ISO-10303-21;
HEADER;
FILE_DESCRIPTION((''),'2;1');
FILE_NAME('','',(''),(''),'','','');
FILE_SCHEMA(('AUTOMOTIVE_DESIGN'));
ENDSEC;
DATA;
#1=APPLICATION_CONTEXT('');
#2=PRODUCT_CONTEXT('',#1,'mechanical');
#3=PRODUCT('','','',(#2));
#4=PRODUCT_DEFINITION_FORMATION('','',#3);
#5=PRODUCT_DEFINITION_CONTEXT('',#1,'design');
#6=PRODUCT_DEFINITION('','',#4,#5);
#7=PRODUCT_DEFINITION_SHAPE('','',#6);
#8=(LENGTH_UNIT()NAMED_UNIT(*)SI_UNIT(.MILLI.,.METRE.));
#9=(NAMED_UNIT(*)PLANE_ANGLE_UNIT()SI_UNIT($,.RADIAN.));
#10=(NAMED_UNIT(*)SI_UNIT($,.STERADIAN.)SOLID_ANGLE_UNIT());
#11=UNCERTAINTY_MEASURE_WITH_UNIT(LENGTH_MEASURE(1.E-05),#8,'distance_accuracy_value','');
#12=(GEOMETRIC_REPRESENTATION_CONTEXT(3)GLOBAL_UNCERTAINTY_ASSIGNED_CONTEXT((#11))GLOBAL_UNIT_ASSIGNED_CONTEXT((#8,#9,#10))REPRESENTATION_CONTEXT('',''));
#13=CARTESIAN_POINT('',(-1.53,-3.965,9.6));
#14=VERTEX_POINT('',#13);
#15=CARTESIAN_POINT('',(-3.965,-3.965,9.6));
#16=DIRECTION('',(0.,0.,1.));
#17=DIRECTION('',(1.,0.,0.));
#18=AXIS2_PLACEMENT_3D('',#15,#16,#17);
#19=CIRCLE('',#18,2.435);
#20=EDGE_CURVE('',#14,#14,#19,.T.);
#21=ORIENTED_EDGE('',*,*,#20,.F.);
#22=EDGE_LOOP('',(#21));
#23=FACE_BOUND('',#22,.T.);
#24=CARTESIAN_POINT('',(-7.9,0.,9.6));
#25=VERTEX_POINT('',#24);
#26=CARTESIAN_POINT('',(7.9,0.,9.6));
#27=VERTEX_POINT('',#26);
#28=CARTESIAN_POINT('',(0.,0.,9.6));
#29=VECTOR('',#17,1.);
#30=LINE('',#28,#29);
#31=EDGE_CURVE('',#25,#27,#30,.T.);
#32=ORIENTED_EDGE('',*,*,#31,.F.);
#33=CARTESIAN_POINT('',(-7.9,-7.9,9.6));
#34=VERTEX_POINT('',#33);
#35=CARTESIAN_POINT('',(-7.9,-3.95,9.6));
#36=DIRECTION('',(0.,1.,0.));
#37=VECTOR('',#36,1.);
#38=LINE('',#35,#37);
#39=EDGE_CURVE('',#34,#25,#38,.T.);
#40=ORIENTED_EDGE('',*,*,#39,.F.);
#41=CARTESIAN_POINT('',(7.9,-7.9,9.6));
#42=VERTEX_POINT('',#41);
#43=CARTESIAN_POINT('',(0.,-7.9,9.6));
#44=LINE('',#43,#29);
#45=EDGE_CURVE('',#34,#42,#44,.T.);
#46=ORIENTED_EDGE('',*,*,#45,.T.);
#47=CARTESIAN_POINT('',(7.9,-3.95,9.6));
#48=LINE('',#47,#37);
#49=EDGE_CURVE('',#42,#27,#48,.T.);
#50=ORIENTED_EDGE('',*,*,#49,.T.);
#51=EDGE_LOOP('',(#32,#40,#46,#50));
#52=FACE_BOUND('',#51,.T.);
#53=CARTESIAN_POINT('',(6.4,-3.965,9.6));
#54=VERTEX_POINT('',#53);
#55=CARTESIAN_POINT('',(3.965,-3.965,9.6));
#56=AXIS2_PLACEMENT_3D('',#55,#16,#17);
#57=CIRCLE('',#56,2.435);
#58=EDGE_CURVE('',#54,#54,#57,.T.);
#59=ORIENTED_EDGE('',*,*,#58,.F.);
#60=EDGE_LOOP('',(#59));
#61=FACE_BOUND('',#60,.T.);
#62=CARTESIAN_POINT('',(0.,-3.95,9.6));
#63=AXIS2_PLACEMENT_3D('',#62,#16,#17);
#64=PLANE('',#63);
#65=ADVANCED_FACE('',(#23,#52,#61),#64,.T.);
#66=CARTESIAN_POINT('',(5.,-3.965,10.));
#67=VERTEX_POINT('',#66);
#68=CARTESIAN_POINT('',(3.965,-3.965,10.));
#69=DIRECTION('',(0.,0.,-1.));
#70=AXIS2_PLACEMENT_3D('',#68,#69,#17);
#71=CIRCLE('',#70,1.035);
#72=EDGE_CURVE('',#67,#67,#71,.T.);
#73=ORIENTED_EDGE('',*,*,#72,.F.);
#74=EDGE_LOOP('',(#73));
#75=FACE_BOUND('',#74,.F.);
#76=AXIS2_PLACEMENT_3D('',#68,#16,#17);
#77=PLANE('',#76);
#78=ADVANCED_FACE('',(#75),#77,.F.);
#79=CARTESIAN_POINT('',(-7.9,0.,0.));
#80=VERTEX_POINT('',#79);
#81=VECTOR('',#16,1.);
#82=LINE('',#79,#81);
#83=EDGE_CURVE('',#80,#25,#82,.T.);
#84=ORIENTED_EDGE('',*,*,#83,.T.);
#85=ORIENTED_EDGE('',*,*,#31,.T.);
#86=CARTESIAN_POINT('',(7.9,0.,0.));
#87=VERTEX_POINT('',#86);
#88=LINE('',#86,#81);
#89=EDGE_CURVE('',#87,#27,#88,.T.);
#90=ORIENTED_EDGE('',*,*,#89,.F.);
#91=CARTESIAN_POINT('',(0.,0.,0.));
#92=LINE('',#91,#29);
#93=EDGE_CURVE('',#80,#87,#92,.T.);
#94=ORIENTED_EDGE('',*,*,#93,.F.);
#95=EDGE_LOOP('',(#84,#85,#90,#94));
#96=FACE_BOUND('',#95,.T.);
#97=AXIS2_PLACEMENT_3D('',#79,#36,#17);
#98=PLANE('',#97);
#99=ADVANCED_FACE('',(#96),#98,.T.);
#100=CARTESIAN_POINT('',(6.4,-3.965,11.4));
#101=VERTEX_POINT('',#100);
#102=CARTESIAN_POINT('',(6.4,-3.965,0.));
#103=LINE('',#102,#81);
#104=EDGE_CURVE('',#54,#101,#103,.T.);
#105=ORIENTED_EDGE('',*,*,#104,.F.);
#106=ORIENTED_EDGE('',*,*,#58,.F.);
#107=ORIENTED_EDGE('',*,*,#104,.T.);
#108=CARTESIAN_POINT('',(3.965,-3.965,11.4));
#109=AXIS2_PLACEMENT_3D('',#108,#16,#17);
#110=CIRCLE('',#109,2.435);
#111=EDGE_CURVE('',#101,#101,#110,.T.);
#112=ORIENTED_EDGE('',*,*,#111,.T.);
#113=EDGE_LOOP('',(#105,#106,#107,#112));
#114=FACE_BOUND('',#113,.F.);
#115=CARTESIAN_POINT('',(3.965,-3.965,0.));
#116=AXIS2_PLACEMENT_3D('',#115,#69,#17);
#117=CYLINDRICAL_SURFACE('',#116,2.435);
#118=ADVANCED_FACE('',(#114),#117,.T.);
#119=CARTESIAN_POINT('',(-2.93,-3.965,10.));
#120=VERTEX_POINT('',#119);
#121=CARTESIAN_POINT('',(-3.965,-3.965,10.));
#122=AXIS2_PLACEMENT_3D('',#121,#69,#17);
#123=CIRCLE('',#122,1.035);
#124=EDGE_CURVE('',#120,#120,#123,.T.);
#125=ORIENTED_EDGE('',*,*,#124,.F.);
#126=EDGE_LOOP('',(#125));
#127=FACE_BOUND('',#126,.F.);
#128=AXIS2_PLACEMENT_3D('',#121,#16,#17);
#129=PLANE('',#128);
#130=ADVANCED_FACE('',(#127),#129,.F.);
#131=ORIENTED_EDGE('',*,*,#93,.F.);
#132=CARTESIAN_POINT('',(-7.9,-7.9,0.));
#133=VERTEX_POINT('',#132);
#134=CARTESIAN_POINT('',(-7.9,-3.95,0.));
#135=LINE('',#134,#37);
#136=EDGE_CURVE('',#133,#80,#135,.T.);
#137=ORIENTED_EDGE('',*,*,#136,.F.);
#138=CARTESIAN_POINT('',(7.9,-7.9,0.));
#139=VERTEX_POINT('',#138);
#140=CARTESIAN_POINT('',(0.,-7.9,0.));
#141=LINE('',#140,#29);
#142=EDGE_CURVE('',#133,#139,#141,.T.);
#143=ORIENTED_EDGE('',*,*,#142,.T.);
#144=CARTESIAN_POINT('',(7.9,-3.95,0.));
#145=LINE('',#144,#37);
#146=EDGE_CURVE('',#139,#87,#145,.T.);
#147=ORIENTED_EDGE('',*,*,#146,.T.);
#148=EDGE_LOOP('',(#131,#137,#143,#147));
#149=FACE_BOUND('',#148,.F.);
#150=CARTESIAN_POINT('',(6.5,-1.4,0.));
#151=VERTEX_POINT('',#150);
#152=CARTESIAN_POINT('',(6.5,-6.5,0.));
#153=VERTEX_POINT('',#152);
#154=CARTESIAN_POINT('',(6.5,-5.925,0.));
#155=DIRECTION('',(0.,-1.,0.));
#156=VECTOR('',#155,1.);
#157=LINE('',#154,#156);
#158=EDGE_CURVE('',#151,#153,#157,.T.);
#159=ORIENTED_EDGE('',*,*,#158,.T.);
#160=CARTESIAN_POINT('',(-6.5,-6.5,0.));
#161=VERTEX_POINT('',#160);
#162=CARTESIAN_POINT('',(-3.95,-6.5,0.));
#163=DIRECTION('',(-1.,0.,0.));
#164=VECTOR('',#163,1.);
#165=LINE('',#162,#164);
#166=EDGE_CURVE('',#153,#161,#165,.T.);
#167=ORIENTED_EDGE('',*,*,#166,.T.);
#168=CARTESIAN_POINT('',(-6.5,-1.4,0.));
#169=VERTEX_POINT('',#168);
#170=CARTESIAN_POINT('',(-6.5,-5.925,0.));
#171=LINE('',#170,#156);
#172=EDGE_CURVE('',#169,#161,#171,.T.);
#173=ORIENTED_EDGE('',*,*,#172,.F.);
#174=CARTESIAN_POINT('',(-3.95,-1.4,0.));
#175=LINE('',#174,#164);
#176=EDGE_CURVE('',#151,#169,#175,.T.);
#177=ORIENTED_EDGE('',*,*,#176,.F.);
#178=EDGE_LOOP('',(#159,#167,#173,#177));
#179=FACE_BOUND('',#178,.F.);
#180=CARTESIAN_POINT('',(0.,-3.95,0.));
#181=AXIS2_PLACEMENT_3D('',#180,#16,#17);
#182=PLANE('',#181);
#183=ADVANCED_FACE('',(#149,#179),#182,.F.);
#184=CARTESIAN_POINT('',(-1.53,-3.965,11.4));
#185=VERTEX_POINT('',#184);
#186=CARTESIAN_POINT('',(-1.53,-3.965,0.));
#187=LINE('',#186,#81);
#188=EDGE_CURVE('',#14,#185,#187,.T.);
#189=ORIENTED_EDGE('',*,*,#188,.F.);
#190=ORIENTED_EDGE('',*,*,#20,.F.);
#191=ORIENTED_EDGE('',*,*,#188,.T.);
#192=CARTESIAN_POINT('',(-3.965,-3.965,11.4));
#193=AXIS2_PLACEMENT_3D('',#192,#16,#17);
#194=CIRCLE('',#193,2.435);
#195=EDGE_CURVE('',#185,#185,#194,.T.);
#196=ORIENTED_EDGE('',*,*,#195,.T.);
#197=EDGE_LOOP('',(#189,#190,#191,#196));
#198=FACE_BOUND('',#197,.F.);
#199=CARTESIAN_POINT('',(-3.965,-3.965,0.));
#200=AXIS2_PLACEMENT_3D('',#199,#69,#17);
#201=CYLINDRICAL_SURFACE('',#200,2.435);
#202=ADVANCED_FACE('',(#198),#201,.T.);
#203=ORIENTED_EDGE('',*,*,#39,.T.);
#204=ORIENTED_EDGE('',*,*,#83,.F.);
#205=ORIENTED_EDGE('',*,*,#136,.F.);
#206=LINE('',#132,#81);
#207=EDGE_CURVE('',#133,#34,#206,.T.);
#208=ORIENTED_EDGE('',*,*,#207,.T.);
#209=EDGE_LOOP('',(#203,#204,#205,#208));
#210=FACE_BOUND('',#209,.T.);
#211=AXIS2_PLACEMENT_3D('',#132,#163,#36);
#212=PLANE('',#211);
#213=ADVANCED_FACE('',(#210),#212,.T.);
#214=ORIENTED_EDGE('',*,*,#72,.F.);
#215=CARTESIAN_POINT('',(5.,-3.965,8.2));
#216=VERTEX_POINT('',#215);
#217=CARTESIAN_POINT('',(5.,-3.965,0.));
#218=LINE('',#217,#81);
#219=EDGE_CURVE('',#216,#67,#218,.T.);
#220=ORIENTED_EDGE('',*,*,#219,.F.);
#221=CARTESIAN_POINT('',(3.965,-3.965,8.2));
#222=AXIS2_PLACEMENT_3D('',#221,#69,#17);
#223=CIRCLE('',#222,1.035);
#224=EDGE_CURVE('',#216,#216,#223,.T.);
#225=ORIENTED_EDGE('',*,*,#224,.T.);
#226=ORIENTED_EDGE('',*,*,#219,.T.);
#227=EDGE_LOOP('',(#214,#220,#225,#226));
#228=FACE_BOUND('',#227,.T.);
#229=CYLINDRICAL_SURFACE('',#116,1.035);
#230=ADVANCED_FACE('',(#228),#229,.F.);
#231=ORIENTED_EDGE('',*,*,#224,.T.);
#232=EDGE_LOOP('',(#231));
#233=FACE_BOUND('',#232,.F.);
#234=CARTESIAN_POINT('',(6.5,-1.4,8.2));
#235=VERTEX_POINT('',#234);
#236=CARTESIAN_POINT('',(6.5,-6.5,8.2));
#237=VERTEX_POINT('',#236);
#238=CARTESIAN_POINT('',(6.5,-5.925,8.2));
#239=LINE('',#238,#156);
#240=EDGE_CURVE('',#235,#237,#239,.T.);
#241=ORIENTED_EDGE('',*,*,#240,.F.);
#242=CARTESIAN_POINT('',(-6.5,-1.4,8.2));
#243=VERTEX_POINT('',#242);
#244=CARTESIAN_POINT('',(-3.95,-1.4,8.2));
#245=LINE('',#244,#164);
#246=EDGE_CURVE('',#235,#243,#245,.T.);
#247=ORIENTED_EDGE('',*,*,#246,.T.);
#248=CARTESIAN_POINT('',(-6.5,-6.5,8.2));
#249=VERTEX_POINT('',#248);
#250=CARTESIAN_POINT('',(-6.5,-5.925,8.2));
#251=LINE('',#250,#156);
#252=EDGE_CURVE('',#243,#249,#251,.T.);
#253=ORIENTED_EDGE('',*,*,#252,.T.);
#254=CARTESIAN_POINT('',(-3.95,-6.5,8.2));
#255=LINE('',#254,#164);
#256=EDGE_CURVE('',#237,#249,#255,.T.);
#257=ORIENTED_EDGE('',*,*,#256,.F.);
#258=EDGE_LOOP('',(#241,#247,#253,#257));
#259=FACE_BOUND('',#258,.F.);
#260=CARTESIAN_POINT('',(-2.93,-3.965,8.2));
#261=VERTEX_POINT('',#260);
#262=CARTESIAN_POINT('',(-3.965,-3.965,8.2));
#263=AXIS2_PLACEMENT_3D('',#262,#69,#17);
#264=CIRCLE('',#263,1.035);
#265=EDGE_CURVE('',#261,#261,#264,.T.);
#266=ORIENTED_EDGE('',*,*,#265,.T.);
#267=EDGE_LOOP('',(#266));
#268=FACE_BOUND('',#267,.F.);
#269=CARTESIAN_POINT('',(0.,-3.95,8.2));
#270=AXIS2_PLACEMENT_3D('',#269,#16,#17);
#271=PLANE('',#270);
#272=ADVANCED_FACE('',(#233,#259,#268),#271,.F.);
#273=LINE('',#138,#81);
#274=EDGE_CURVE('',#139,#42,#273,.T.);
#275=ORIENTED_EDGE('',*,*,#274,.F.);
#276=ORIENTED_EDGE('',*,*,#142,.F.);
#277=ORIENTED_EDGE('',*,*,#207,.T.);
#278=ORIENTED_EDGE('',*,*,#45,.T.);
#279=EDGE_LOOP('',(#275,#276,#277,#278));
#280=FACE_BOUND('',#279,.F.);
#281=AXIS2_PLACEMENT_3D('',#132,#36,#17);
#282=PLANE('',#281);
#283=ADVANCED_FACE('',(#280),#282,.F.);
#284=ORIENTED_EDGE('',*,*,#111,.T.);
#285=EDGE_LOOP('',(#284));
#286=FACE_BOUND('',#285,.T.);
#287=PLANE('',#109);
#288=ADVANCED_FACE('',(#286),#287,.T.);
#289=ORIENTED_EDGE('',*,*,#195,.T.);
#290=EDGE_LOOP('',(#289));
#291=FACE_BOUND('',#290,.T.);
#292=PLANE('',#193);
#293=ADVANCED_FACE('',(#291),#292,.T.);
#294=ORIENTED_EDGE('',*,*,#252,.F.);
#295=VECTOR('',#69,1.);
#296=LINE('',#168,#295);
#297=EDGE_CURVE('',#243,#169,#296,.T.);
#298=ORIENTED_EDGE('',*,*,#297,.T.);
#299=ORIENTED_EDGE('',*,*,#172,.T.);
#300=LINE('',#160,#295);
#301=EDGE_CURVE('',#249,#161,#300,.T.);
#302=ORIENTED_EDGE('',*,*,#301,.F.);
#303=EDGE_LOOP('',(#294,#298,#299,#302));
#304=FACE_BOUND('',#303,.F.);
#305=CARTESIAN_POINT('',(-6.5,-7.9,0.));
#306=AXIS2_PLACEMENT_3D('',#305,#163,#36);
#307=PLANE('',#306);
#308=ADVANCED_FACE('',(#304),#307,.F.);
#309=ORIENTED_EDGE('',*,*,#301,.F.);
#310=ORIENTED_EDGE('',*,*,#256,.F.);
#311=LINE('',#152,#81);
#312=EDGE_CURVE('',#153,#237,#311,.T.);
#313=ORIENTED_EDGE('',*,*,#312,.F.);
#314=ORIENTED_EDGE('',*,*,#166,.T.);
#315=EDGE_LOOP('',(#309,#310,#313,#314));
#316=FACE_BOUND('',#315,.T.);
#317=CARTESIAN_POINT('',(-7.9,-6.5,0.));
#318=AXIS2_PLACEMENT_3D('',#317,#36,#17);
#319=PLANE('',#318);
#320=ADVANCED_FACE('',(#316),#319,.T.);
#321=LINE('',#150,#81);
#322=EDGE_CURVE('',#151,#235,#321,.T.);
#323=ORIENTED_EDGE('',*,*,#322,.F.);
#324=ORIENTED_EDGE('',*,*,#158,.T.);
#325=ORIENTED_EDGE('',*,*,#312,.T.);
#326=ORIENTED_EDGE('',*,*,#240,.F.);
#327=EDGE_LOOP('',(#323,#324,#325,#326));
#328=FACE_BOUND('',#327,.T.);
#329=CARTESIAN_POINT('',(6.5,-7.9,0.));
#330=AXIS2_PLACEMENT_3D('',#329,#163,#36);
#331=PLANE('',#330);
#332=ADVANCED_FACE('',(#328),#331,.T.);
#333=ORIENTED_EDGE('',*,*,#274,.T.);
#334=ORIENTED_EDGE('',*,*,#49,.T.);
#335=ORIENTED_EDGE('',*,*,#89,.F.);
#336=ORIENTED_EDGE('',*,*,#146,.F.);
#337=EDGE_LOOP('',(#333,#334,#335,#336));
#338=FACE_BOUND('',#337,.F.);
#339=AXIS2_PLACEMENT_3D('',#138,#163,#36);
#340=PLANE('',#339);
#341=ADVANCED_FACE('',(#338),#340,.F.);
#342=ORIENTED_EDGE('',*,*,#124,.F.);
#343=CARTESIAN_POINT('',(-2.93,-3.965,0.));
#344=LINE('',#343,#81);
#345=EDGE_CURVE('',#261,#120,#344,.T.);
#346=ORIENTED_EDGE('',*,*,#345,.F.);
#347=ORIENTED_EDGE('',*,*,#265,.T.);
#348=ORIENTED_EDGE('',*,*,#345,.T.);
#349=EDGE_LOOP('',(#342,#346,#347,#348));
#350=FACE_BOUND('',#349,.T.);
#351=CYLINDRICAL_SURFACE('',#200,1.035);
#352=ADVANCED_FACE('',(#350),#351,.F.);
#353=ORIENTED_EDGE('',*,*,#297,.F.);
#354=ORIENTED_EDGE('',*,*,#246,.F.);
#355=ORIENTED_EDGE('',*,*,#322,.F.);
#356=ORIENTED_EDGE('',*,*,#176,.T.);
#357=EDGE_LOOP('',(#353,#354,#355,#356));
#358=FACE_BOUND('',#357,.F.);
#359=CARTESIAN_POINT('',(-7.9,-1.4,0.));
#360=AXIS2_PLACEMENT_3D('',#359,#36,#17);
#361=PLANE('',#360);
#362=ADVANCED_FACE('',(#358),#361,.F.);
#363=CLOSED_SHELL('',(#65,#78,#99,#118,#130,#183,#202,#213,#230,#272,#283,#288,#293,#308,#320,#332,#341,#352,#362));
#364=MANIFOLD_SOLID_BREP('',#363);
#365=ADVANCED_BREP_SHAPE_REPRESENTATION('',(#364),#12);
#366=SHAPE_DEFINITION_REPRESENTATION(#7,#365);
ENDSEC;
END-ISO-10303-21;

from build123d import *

# Parameters (mm, degrees)
F0_W     = 15.8
F0_H     = 7.9
F0_R     = 2.435
F1_DEPTH = 9.6
F2_DEPTH = 11.4
F3_T     = -1.4


# Not quite as in the source:
# - a feature names something its author has since deleted; it is built from what else it names


with BuildPart() as f1:
    # F0 (on Top) → F1 (new body)
    with BuildSketch(Plane.XY):
        with Locations((0, -3.95)):
            Rectangle(F0_W, F0_H)
        with Locations((-3.965, -3.965)):
            Circle(F0_R, mode=Mode.SUBTRACT)
        with Locations((3.965, -3.965)):
            Circle(F0_R, mode=Mode.SUBTRACT)
    extrude(amount=F1_DEPTH)

    # F0 (on Top) → F2 (join)
    with BuildSketch(Plane.XY):
        with Locations((3.965, -3.965)):
            Circle(F0_R)
        with Locations((-3.965, -3.965)):
            Circle(F0_R)
    extrude(amount=F2_DEPTH)

    # F3
    f3_openings = [f1.faces().sort_by_distance(p)[0] for p in [
        (0, -3.95, 0),
    ]]
    offset(amount=F3_T, openings=f3_openings, kind=Kind.INTERSECTION)


solid = f1.part
